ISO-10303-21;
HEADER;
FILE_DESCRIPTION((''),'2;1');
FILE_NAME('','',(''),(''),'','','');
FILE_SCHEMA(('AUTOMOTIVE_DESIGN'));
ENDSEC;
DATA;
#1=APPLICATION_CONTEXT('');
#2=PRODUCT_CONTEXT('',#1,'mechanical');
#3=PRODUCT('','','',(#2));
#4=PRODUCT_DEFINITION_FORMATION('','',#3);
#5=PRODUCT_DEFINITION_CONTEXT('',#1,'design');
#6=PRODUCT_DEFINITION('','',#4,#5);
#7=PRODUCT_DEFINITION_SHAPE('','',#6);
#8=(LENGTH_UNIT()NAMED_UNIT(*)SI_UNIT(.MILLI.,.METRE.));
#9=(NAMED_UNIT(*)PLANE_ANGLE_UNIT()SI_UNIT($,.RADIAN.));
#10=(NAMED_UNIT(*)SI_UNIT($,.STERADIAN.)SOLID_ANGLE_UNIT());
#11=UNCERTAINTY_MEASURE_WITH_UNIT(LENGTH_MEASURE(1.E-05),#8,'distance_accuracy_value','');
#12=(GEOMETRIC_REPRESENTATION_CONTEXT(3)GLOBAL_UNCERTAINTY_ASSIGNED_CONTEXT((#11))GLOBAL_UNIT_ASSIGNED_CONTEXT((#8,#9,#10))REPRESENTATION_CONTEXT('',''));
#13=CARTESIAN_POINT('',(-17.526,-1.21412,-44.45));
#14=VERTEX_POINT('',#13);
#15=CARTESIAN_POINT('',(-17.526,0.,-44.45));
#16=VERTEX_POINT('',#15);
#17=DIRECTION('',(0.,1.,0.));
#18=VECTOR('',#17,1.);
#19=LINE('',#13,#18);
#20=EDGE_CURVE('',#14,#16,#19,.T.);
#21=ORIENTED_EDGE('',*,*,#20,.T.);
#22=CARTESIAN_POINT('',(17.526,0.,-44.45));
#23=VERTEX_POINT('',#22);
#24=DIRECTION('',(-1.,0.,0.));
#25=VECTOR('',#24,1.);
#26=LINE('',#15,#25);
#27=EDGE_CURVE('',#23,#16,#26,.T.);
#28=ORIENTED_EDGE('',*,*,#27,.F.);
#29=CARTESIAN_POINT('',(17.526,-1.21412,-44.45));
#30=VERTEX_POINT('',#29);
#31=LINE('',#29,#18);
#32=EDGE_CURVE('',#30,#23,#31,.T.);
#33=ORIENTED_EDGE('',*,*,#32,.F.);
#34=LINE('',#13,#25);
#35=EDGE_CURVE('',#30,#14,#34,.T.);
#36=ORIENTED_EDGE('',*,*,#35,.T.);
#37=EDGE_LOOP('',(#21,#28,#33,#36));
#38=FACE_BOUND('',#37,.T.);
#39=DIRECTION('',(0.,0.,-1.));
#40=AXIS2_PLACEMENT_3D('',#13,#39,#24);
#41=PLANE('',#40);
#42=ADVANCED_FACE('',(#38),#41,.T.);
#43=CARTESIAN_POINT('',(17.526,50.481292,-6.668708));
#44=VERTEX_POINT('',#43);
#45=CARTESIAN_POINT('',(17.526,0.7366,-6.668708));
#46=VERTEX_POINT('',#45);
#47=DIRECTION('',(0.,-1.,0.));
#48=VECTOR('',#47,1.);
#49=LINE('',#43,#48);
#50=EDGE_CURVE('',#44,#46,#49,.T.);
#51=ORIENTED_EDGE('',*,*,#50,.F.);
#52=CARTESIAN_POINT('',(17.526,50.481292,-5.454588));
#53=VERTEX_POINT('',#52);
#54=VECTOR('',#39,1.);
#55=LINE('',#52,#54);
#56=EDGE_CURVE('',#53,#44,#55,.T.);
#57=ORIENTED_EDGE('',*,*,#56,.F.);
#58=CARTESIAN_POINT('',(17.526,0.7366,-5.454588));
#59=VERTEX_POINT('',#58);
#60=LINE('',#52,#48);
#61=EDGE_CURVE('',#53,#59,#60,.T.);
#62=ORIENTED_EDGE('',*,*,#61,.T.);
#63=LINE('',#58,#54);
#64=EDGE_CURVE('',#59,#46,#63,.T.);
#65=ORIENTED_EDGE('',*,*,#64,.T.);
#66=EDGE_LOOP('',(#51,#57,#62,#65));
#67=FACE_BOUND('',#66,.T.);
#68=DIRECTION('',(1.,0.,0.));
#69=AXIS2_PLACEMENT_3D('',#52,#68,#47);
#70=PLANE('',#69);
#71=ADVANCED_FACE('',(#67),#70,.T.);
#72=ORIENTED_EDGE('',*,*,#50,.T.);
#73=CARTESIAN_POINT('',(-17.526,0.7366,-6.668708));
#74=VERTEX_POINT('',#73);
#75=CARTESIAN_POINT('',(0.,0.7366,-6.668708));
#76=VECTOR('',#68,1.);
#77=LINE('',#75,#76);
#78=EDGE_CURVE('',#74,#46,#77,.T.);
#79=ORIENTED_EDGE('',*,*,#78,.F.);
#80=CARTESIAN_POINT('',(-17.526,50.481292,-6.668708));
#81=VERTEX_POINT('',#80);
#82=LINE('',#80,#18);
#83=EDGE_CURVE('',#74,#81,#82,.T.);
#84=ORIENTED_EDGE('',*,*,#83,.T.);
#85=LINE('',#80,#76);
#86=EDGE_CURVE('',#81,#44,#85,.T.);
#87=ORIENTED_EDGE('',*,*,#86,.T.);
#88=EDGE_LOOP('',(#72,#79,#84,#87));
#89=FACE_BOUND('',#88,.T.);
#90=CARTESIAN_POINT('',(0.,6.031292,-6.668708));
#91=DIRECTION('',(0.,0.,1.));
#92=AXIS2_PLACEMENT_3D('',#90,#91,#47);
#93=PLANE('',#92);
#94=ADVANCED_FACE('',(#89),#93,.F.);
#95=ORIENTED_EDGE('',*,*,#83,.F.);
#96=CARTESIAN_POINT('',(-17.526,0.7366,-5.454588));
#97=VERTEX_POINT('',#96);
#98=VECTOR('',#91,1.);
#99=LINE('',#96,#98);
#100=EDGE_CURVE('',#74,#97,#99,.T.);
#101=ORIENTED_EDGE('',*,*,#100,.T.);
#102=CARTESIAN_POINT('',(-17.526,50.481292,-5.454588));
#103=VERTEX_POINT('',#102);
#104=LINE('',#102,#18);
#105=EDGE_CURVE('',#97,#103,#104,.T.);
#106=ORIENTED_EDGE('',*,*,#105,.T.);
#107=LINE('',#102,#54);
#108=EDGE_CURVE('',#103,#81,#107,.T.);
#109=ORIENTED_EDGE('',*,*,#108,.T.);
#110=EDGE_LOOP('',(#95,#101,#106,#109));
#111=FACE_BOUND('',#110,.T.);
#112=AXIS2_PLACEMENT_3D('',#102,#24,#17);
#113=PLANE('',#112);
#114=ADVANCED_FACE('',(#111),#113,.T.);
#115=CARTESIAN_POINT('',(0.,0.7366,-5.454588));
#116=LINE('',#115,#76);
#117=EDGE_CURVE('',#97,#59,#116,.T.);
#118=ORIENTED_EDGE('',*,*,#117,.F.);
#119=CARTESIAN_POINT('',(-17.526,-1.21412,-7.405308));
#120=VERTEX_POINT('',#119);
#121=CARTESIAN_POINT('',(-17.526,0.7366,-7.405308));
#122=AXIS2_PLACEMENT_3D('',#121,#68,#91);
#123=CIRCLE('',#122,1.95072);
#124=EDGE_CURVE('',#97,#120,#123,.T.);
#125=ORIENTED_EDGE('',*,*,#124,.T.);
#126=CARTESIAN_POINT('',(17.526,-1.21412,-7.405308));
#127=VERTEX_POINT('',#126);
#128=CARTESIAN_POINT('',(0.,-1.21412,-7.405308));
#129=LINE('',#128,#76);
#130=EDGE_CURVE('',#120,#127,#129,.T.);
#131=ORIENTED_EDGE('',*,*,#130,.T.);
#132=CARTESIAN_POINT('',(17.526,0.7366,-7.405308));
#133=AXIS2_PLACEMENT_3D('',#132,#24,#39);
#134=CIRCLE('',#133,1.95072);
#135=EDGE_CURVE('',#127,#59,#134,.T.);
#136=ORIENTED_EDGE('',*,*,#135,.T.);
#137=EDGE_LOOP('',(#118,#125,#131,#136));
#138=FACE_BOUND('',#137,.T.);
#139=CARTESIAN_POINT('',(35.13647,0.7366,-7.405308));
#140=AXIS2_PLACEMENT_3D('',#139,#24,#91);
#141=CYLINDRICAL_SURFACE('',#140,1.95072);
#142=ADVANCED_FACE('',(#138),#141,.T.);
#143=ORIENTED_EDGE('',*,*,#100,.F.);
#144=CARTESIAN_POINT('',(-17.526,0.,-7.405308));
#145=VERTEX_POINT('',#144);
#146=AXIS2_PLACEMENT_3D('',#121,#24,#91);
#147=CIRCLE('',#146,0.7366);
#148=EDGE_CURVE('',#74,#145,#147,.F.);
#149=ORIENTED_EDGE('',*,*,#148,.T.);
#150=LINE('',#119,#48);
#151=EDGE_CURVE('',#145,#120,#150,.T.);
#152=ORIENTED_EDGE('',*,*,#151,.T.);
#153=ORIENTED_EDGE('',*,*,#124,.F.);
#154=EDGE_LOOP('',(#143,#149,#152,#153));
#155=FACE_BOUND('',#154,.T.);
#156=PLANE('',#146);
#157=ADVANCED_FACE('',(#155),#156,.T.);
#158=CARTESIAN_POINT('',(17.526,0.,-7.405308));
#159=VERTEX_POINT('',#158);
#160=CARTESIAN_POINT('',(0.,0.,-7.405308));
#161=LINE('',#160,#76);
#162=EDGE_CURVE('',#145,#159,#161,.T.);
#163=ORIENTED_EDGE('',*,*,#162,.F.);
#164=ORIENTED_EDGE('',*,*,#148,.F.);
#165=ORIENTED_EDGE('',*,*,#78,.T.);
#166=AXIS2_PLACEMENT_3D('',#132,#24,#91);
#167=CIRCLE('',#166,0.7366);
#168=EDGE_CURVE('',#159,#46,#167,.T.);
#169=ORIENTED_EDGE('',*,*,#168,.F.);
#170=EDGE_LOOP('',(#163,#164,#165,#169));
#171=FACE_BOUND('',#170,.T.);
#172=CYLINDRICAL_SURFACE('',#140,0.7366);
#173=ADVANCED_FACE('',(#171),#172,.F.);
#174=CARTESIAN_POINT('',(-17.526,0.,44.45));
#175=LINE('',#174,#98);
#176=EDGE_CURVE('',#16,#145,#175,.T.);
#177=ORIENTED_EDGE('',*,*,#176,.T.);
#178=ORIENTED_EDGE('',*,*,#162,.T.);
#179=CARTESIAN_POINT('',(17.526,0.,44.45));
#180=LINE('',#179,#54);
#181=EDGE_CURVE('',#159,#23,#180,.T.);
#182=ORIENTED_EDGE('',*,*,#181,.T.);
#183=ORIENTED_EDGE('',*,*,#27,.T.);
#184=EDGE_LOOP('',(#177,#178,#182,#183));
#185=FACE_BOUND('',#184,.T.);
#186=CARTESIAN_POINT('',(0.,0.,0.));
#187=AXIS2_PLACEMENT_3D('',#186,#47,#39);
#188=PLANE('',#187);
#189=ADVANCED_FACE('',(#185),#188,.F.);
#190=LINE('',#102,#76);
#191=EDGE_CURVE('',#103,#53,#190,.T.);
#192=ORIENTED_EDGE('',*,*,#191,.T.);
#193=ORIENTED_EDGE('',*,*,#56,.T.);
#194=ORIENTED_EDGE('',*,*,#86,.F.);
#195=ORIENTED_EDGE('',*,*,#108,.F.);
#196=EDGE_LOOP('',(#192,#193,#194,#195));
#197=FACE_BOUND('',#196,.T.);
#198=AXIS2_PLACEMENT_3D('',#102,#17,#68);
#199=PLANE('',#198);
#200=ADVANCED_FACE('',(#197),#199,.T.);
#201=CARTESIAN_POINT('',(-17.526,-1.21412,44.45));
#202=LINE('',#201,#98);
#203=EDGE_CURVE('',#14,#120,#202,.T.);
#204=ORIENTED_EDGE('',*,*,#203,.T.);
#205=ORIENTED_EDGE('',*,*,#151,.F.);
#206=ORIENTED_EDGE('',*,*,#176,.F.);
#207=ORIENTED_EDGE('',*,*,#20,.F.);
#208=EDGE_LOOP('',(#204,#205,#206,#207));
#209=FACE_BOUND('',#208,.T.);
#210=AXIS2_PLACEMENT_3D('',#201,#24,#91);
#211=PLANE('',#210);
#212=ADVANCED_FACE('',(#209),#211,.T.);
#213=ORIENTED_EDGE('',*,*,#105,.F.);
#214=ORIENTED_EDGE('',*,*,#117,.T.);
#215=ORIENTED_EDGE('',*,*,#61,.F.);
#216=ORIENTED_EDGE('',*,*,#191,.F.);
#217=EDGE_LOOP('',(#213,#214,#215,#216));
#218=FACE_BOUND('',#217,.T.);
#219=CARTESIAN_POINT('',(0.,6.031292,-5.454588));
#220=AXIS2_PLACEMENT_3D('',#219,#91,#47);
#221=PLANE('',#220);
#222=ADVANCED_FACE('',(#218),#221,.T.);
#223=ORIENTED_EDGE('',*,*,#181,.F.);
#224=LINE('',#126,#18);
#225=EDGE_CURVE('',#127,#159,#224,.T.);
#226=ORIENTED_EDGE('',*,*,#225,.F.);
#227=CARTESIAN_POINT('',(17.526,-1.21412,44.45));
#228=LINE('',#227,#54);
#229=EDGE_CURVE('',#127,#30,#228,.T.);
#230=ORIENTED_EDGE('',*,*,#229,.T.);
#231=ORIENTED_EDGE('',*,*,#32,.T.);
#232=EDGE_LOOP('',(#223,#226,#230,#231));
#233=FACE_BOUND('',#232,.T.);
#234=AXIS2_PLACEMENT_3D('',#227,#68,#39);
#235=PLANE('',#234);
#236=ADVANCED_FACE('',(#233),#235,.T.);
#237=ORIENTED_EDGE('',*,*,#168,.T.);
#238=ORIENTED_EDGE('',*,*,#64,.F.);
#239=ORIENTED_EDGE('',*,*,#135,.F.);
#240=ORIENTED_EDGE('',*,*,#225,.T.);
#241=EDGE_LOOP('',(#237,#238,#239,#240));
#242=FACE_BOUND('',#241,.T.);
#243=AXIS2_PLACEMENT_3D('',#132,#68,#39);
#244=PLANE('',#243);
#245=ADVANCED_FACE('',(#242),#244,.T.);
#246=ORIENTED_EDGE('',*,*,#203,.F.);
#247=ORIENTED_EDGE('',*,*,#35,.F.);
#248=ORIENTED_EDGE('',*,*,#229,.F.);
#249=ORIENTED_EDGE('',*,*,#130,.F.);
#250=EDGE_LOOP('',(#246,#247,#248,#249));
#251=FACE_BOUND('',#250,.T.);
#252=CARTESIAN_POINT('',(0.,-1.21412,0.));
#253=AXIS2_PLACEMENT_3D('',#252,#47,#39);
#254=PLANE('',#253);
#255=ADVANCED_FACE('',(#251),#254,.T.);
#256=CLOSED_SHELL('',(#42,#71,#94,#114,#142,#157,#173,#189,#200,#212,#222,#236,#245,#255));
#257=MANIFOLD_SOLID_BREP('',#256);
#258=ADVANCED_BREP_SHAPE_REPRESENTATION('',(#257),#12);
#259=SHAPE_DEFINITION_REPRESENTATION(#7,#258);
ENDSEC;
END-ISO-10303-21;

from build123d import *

# Parameters (mm, degrees)
SKETCH1_W              = 35.052
SKETCH1_H              = 88.9
BASE_FLANGE1_DEPTH     = 1.21412
SKETCHED_START         = -17.526
SKETCHED_BEND1_DEPTH   = 35.052
SKETCHED_BEND1_2_DEPTH = 35.052


# Read off the part's stored shape, not the designer's step: Sketched Bend1
# Sheet-metal steps are written as plain solids
with BuildPart() as part:
    # Sketch1 → Base-Flange1 (new body)
    with BuildSketch(Plane(origin=(0, 0, 0), x_dir=(1, 0, 0), z_dir=(0, 1, 0))):
        Rectangle(SKETCH1_W, SKETCH1_H)
    extrude(amount=-BASE_FLANGE1_DEPTH)

    # Sketched Bend1 outline → Sketched Bend1 (cut)
    with BuildSketch(Plane.YZ.offset(SKETCHED_START)):
        with BuildLine():
            ThreePointArc((-1.21412, -7.405308096), (-0.882382531, -6.317096681), (0, -5.599005531))
            Line((0, -5.599005531), (0, 44.45))
            Line((0, 44.45), (-1.21412, 44.45))
            Line((-1.21412, 44.45), (-1.21412, -7.405308096))
        make_face()
    extrude(amount=SKETCHED_BEND1_DEPTH, mode=Mode.SUBTRACT)

    # Sketched Bend1 2 outline → Sketched Bend1 2 (add)
    with BuildSketch(Plane.YZ.offset(SKETCHED_START)):
        with BuildLine():
            Line((50.481291904, -6.668708096), (50.481291904, -5.454588096))
            Line((50.481291904, -5.454588096), (0.7366, -5.454588096))
            ThreePointArc((0.7366, -5.454588096), (0.361288145, -5.491032899), (0, -5.599005531))
            Line((0, -5.599005531), (0, -7.405308096))
            ThreePointArc((0, -7.405308096), (0.215745145, -6.884453241), (0.7366, -6.668708096))
            Line((0.7366, -6.668708096), (50.481291904, -6.668708096))
        make_face()
    extrude(amount=SKETCHED_BEND1_2_DEPTH)


solid = part.part
